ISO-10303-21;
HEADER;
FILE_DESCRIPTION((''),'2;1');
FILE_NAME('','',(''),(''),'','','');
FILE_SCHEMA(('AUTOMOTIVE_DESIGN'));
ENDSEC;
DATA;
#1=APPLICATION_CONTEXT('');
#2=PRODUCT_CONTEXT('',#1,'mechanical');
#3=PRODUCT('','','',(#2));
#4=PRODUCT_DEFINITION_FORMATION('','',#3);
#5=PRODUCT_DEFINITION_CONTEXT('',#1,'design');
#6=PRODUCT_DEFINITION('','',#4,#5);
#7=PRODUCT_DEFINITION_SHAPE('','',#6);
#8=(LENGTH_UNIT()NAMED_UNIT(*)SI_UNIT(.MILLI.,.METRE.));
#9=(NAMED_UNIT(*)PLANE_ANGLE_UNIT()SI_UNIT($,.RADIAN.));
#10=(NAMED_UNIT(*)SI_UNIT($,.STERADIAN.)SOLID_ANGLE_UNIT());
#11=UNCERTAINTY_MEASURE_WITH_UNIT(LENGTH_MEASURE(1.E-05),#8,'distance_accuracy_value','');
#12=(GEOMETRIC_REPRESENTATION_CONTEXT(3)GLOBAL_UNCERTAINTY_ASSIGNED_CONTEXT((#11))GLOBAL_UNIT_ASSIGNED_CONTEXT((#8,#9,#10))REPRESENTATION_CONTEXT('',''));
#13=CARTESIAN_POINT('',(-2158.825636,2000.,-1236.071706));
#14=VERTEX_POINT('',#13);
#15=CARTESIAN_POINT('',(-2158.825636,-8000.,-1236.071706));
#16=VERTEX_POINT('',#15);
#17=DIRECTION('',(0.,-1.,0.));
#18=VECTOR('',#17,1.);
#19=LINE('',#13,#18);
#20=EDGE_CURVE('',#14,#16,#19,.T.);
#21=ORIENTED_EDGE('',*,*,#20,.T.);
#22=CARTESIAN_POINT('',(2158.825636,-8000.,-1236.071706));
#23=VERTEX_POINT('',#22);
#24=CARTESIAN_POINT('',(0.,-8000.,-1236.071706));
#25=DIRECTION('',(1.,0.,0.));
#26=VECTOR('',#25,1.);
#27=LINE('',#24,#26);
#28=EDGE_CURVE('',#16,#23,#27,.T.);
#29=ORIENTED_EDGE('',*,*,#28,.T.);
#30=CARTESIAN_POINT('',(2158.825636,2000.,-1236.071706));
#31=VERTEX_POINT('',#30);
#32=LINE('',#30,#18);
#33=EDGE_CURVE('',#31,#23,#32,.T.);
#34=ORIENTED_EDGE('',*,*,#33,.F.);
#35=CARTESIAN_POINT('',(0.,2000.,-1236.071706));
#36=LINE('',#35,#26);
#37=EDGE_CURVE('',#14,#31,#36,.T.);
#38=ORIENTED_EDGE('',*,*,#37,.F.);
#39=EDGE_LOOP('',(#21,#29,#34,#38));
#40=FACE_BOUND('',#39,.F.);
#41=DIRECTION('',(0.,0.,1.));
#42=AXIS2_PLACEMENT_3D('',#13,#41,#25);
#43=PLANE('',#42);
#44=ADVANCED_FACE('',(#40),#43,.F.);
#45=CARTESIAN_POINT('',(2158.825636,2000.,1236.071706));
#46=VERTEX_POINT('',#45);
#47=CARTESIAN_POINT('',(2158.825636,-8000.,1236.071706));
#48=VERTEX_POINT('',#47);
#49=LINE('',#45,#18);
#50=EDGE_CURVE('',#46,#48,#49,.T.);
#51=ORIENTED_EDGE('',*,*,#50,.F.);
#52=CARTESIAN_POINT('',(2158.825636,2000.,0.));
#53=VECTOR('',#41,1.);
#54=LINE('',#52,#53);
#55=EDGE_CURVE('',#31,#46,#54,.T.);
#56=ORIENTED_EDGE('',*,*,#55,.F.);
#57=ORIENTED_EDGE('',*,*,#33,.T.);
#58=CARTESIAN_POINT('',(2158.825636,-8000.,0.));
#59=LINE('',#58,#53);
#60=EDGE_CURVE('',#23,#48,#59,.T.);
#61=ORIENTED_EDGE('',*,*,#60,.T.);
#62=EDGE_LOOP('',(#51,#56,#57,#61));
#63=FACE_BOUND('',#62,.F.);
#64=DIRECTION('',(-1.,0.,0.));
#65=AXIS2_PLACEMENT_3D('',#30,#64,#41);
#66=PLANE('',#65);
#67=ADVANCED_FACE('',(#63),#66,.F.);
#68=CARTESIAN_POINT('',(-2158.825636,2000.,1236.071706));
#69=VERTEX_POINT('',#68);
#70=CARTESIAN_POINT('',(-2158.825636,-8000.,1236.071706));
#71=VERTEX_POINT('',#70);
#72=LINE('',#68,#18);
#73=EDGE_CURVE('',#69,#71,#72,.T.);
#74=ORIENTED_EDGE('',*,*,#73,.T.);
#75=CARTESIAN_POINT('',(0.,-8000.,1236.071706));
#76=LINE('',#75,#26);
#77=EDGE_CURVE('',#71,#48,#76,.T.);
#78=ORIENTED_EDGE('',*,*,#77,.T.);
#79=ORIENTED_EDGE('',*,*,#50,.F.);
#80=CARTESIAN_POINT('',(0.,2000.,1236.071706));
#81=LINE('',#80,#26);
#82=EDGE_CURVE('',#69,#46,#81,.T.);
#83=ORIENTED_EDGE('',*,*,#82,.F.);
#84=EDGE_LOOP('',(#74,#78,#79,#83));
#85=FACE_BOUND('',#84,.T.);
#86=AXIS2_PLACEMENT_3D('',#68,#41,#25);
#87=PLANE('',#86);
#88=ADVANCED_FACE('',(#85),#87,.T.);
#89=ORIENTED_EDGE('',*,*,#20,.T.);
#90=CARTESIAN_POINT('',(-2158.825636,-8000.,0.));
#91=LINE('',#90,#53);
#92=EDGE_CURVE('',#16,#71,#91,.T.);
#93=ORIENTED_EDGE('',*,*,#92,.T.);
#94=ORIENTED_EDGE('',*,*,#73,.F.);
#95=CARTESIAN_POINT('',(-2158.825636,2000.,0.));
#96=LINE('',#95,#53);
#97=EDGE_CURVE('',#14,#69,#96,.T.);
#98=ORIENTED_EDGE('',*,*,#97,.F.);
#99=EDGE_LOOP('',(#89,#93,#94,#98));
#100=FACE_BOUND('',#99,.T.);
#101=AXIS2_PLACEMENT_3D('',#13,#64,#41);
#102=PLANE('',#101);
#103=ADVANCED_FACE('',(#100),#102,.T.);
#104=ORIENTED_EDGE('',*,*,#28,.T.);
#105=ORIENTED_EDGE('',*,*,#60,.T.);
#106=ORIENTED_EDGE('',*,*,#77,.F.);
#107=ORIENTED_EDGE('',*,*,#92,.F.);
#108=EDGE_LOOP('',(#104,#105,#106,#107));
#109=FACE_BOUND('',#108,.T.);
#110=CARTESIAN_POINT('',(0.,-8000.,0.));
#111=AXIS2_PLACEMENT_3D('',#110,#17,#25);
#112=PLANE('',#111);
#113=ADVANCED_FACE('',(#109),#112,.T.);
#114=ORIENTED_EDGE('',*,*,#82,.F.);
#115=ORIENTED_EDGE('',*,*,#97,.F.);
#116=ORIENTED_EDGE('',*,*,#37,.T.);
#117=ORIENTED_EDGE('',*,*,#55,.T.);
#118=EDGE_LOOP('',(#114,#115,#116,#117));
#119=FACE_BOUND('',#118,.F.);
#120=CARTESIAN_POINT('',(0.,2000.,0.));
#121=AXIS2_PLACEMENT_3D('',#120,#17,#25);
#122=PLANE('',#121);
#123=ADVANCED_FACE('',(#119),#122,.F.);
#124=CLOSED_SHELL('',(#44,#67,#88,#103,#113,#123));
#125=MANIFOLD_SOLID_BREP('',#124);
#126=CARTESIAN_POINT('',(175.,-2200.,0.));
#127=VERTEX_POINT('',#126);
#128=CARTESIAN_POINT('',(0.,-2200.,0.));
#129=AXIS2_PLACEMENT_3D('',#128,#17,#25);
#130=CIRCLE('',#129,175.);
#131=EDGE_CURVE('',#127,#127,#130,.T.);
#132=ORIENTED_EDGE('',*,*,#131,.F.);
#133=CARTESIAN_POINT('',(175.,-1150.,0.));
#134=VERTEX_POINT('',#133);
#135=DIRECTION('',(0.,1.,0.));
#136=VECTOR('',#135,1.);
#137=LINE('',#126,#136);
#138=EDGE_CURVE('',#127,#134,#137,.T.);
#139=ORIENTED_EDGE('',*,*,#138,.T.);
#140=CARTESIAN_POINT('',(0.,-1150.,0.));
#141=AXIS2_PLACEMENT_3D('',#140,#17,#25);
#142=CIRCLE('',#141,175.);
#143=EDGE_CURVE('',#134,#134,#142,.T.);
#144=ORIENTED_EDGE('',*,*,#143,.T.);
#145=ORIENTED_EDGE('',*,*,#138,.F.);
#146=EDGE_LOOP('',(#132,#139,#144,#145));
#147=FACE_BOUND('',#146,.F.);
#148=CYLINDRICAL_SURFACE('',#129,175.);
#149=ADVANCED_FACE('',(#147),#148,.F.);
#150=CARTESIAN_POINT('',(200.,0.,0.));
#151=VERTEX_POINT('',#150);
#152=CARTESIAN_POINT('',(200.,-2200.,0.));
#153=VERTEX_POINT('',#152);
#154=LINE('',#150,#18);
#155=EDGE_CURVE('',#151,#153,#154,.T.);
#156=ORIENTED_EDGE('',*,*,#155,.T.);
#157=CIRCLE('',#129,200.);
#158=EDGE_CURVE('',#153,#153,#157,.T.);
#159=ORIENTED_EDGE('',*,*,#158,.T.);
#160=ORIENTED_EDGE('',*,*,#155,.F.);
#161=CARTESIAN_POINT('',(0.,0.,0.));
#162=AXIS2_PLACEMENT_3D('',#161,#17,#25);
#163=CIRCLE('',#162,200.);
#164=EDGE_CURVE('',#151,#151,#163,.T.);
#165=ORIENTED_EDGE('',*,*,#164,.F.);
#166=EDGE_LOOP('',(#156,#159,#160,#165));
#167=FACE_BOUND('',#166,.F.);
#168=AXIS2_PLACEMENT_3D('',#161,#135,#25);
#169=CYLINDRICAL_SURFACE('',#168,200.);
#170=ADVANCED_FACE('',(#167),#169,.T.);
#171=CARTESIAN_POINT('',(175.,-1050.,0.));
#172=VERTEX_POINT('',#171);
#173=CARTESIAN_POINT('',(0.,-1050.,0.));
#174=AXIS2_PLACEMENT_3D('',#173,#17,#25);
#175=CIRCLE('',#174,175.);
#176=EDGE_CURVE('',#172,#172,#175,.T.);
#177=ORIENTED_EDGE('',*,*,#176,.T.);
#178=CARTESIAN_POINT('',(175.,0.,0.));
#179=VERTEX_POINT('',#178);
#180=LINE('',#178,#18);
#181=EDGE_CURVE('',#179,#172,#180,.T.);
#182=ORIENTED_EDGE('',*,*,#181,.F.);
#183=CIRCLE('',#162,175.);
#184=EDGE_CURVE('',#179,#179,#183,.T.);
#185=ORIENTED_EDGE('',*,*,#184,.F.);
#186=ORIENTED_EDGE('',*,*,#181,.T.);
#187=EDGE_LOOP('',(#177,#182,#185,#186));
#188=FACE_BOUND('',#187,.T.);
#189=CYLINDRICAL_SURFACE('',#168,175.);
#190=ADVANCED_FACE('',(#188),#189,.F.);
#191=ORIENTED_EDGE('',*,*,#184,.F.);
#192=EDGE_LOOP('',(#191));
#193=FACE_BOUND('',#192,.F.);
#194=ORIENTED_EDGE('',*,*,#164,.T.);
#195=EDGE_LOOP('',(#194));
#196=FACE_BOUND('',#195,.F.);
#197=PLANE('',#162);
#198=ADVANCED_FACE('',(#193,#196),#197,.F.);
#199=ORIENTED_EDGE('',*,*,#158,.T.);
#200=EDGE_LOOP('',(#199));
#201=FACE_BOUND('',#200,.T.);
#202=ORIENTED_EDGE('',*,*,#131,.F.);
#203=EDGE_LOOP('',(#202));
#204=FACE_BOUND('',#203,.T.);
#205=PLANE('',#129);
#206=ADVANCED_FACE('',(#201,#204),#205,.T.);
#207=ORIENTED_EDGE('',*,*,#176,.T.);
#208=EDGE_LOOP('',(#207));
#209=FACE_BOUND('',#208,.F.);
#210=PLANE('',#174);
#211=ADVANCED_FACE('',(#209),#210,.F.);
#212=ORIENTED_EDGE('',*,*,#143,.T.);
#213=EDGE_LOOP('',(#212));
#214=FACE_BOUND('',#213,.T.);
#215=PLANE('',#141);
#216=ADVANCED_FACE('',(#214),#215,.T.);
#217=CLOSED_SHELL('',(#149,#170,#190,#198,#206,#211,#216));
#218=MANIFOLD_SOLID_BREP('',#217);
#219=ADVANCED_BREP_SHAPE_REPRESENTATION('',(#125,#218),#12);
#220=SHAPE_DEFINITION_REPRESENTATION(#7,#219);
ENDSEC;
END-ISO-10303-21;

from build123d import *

# Parameters (mm, degrees)
F0_R     = 200
F1_DEPTH = 2200
F2_R     = 175
F3_DEPTH = 1050
F4_R     = 175
F5_DEPTH = 1050
F7_W     = 4317.6512718201
F7_H     = 2472.1434116364
F8_DEPTH = 10000


with BuildPart() as f1:
    # F0 (on Front) → F1 (new body)
    with BuildSketch(Plane.XZ):
        Circle(F0_R)
    extrude(amount=F1_DEPTH)

    # F2 (on Front) → F3 (cut)
    with BuildSketch(Plane.XZ):
        Circle(F2_R)
    extrude(amount=F3_DEPTH, mode=Mode.SUBTRACT)

    # F4 (on face) → F5 (cut)
    with BuildSketch(Plane.XZ.offset(2200)):
        Circle(F4_R)
    extrude(amount=-F5_DEPTH, mode=Mode.SUBTRACT)


with BuildPart() as f8:
    # F7 (on offset) → F8 (new body)
    with BuildSketch(Plane.XZ.offset(-2000)):
        Rectangle(F7_W, F7_H)
    extrude(amount=F8_DEPTH)


solid = Compound([f1.part, f8.part])
